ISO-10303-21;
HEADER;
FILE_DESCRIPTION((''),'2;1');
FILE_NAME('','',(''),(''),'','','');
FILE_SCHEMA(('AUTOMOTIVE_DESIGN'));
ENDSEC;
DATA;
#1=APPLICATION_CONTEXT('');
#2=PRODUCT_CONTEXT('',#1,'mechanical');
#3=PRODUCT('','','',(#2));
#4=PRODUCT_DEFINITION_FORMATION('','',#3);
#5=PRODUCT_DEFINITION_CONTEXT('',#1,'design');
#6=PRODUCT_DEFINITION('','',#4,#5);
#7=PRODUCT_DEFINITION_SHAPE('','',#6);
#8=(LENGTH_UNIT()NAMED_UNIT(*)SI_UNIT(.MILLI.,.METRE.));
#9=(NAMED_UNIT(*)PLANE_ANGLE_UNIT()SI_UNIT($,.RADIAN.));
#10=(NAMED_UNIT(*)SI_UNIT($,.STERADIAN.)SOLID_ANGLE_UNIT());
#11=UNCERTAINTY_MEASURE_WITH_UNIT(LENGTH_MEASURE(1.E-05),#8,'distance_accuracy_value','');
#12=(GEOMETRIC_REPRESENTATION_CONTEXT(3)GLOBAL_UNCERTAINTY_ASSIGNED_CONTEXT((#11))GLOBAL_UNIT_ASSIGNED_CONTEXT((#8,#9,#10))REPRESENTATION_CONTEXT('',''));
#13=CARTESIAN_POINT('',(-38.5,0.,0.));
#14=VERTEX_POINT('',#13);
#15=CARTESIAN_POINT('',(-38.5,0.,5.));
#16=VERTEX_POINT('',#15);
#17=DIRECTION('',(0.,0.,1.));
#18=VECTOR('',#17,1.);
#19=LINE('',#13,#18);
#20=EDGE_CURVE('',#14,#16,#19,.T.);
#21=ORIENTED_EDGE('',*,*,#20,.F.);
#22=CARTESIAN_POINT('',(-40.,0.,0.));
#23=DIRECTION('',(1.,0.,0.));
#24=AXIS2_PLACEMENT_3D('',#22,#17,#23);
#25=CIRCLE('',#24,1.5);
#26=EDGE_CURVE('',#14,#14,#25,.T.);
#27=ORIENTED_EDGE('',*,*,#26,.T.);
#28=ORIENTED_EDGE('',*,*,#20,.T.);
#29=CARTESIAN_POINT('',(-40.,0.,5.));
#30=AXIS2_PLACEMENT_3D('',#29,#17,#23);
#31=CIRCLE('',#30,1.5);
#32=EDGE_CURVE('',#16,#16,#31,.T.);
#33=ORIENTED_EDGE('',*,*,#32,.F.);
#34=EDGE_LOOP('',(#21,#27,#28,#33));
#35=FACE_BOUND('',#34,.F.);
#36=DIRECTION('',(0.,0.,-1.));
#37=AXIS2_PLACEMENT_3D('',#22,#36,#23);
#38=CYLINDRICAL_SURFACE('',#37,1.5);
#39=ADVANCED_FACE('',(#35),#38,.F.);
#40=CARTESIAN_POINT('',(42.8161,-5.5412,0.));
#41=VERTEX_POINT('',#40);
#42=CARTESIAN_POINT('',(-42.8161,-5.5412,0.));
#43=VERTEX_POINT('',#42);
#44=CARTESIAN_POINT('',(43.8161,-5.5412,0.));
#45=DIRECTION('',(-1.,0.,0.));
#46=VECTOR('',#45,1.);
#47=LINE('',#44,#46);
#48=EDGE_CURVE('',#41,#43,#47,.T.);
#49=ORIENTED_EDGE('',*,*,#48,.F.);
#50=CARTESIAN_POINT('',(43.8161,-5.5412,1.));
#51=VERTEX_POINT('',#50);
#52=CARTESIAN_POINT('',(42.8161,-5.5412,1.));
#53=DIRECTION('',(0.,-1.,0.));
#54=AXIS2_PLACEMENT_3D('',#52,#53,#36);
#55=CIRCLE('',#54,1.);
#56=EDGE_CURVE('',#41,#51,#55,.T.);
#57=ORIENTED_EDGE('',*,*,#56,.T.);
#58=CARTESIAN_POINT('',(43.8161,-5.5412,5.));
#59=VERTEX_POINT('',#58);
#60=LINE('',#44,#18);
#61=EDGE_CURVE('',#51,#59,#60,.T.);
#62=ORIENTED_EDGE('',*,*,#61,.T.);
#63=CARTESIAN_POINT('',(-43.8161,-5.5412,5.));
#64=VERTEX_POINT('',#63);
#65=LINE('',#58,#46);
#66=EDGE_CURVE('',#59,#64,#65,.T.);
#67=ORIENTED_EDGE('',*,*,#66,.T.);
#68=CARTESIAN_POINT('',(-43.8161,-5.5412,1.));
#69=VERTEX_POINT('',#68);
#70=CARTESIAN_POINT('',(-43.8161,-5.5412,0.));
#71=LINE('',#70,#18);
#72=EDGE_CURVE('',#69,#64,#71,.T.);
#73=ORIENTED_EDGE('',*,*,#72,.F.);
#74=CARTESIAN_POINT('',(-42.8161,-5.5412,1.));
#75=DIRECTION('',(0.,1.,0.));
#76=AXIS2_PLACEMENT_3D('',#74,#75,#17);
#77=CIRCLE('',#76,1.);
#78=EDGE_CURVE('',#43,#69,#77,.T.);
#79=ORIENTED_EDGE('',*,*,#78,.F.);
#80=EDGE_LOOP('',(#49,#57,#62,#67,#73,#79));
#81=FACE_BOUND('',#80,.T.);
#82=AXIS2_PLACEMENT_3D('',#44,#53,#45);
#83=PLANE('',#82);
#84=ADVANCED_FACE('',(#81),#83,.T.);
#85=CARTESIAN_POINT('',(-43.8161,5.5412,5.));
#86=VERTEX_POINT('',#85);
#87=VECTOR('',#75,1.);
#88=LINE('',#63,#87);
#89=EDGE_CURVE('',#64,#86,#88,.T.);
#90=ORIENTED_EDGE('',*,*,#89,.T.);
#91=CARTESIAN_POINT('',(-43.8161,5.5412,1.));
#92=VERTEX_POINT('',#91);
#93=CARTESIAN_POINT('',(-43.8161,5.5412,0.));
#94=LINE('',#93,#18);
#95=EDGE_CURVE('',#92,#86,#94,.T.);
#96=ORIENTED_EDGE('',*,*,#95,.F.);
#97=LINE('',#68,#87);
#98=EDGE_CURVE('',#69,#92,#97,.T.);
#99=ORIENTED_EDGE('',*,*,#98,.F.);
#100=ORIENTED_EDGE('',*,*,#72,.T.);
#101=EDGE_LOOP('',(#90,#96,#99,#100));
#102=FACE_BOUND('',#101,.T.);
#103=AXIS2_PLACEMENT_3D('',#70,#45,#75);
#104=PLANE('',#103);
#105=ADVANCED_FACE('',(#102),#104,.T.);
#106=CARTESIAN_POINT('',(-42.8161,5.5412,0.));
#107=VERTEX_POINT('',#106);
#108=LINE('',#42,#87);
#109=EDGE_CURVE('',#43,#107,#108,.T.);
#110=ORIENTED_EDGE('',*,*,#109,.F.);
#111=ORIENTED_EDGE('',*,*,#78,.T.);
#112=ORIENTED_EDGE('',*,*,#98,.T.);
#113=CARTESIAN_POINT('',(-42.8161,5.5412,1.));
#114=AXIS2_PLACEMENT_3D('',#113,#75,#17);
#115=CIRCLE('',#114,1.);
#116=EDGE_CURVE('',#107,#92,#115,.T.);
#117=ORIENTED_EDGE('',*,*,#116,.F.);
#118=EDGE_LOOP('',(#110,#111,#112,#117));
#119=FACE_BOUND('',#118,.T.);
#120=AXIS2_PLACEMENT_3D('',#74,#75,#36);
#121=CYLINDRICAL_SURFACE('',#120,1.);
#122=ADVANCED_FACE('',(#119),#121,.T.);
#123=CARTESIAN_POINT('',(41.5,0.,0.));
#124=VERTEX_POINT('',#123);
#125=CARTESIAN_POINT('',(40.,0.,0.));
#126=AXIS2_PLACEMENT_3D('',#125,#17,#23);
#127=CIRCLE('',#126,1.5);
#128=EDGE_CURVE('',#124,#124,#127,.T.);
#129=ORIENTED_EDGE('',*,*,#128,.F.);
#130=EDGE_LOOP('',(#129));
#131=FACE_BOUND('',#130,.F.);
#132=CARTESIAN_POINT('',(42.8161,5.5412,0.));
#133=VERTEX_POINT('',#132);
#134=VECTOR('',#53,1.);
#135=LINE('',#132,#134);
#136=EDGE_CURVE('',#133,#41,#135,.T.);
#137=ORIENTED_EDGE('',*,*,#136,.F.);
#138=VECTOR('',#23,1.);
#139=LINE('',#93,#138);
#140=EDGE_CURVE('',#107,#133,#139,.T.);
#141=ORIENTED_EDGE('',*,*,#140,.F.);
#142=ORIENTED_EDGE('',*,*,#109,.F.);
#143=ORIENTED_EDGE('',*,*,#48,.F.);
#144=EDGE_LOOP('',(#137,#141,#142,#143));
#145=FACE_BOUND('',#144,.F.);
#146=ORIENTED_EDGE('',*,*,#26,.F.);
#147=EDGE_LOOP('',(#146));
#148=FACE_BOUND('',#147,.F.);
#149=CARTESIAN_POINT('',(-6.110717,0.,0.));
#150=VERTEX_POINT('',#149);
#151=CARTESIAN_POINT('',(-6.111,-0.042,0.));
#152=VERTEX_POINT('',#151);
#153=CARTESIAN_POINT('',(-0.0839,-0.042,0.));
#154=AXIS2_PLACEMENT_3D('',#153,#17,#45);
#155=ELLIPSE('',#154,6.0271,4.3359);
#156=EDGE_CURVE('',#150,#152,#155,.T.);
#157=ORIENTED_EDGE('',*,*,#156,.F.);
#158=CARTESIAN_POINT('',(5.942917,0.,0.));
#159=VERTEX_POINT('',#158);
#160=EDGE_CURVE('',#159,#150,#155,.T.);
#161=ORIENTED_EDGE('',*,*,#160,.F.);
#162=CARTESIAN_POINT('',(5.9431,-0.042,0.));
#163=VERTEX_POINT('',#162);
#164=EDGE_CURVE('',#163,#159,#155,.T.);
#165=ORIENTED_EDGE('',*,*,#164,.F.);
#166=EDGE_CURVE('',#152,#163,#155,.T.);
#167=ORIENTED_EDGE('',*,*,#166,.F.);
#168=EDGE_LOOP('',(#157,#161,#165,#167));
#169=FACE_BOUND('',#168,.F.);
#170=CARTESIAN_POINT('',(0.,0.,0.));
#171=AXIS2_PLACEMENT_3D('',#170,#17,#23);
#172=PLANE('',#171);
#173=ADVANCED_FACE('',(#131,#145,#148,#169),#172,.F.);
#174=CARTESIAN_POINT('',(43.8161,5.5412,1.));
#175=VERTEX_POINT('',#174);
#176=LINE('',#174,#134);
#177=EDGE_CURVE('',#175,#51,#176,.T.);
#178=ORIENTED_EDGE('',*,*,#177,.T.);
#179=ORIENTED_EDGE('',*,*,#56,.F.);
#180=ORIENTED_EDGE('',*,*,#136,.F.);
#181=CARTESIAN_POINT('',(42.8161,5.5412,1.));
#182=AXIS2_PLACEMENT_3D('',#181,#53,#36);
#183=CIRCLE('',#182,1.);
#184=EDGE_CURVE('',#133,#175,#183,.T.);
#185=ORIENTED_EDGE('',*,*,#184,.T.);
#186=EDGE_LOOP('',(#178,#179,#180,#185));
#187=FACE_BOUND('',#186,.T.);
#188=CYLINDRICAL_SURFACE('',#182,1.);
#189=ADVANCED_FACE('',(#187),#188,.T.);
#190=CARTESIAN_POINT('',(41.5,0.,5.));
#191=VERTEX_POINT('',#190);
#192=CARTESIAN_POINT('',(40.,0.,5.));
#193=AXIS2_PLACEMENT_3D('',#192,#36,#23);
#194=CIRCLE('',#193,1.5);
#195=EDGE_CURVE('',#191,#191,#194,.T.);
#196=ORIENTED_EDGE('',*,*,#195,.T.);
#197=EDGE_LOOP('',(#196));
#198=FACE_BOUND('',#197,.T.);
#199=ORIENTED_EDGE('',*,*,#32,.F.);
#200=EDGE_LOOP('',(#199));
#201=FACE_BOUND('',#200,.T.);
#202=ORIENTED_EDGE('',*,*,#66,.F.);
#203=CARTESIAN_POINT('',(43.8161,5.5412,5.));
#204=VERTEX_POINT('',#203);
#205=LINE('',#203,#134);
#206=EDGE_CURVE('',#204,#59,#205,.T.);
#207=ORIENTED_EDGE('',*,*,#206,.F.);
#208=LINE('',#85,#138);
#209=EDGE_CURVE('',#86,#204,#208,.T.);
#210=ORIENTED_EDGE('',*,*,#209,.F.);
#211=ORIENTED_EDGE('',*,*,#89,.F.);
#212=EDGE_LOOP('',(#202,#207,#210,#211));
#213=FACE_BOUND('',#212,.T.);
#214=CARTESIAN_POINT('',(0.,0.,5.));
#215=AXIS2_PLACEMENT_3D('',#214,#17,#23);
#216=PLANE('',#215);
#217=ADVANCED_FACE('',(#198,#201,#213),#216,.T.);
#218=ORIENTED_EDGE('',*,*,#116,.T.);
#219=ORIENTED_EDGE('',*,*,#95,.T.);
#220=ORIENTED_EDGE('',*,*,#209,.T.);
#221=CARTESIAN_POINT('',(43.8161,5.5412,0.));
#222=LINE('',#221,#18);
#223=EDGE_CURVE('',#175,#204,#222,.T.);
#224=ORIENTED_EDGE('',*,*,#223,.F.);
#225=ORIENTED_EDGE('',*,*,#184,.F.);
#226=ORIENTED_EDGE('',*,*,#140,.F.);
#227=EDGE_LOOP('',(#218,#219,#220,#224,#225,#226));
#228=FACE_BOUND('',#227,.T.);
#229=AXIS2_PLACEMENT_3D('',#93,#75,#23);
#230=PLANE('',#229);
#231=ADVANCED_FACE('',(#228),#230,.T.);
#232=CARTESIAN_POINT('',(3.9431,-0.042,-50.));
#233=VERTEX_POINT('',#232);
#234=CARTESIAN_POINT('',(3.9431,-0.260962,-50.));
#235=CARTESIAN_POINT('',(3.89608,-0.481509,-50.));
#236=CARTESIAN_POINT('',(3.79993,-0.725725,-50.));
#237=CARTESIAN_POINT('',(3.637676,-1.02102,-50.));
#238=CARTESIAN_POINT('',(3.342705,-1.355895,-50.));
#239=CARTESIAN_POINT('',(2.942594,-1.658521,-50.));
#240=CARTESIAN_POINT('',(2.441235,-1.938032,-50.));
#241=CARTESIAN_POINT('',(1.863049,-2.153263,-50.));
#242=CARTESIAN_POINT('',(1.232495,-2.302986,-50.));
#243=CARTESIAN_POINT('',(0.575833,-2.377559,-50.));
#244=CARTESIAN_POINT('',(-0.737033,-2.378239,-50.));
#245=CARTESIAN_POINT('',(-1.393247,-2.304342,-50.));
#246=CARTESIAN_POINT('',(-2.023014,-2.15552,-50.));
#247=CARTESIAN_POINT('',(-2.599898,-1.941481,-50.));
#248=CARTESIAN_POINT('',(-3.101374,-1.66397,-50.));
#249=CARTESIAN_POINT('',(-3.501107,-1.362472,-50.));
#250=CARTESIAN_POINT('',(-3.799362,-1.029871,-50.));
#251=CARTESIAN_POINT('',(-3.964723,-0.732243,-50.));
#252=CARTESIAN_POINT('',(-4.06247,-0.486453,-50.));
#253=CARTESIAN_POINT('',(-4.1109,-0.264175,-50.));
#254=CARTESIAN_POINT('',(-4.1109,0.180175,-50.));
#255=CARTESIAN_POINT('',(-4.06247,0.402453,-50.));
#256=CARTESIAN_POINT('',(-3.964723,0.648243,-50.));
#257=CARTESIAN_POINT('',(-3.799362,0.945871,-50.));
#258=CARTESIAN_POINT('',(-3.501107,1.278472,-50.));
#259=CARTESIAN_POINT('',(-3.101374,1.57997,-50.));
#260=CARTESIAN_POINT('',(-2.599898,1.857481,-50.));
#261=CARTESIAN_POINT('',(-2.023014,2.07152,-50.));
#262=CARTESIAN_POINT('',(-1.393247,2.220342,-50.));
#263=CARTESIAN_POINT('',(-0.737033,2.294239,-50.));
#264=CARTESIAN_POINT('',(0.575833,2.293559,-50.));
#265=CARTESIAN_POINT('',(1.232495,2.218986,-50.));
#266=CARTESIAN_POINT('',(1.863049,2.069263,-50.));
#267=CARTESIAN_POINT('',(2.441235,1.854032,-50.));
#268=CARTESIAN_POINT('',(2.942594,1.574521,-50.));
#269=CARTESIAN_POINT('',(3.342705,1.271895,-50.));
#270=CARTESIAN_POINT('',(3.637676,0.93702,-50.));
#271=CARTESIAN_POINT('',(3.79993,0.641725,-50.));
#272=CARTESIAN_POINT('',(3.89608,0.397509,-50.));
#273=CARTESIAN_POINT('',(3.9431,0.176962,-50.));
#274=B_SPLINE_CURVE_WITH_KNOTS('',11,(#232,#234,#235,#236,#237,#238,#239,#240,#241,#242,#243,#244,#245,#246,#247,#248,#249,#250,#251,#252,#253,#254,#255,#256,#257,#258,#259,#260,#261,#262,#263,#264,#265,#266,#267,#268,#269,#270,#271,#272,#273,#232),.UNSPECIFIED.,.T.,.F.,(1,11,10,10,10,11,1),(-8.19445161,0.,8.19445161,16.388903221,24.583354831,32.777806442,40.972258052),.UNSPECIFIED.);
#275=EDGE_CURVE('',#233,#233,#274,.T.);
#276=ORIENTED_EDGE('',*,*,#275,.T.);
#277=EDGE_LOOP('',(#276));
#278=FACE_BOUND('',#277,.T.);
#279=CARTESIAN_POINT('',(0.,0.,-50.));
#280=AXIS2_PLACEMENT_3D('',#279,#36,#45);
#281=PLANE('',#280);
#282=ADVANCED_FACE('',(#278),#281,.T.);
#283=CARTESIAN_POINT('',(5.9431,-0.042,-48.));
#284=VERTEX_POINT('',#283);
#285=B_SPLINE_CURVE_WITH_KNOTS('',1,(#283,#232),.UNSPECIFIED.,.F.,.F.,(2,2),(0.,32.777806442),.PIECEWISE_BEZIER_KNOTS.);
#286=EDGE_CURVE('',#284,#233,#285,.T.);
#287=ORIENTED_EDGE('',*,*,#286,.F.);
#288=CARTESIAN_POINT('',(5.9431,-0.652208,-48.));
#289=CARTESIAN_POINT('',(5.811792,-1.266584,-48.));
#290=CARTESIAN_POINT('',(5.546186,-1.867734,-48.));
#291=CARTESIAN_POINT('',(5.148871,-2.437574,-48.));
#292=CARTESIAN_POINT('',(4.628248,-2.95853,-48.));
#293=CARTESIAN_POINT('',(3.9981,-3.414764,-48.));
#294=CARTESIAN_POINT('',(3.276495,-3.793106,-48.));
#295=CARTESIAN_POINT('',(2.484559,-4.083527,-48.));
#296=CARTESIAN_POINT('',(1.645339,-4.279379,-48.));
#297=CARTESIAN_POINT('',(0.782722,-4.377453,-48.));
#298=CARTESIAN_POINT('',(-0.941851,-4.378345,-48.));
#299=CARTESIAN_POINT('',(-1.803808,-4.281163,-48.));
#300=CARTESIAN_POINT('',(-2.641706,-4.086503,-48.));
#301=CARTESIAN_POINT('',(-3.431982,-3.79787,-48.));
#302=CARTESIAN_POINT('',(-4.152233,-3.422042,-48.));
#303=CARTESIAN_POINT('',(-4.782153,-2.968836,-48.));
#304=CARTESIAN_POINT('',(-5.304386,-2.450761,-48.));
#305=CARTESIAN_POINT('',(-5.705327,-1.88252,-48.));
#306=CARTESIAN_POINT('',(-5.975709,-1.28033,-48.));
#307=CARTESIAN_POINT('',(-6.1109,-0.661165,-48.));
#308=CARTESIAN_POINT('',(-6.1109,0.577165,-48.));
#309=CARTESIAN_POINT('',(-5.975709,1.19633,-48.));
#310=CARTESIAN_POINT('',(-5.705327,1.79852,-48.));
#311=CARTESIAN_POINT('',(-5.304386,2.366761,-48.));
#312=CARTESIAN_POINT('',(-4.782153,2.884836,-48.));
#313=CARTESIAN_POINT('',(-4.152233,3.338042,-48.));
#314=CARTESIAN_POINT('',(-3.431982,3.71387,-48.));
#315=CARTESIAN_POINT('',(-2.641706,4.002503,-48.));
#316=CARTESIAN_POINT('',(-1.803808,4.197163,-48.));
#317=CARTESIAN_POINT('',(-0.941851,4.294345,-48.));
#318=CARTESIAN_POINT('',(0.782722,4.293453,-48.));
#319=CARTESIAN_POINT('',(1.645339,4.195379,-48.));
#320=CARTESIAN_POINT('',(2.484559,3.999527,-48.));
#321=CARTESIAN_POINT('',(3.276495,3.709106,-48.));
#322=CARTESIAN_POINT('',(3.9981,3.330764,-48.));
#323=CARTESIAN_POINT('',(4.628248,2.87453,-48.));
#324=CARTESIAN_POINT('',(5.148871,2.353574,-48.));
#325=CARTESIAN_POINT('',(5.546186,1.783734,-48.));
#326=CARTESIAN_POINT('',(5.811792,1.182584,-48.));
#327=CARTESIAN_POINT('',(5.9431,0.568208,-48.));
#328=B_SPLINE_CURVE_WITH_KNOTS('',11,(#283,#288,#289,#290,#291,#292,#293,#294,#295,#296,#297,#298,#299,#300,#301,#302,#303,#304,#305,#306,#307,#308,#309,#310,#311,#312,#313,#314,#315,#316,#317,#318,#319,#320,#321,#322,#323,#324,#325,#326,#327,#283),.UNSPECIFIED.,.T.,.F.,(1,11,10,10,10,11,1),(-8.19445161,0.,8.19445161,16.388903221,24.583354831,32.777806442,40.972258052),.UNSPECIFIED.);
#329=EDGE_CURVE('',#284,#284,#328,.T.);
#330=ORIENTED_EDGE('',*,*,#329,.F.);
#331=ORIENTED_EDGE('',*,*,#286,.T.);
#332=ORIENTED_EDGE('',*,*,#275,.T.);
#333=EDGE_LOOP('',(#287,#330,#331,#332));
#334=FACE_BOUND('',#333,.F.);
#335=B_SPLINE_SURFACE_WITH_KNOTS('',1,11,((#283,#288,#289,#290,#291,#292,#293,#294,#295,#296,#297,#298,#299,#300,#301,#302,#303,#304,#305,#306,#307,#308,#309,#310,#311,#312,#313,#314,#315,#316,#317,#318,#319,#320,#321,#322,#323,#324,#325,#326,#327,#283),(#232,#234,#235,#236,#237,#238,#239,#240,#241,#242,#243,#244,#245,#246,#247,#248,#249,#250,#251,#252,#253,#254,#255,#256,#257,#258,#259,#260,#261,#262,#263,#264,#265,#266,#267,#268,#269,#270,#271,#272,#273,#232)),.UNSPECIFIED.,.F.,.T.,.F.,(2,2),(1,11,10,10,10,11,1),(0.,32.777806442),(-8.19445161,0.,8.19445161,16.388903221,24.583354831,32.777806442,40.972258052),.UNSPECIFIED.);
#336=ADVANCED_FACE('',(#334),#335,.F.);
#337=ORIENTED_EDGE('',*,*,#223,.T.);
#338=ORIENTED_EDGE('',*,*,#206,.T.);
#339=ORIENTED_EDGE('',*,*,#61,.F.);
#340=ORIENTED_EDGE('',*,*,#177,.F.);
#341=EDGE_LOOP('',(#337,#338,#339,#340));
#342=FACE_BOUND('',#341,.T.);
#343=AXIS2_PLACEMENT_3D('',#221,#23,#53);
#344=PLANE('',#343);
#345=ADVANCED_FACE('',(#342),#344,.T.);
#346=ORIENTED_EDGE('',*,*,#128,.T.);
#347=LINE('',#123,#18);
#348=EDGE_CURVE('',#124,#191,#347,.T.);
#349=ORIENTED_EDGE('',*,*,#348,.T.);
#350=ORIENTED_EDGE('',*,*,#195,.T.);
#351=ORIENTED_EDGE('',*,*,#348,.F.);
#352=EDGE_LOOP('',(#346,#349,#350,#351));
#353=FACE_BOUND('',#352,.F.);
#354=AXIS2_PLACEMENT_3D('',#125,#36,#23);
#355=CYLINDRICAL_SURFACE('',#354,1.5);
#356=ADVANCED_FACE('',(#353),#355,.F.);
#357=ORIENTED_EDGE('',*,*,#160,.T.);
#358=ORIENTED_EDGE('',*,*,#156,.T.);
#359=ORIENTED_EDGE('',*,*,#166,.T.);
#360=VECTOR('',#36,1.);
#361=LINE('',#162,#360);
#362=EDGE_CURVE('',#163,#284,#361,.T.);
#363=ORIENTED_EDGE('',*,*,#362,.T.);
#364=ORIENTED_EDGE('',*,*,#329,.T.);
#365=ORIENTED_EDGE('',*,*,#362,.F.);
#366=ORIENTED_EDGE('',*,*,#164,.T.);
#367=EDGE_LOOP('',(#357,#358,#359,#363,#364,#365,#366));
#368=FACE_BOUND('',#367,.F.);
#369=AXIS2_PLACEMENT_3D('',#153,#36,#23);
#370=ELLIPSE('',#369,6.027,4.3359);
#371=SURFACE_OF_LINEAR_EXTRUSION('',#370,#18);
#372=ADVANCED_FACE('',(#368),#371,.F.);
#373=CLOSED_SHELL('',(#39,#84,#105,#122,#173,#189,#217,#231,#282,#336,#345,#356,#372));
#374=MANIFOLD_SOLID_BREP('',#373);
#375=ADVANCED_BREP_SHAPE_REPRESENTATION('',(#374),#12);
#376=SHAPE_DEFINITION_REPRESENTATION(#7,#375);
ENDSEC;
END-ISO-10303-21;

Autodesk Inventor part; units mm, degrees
ref_plane "YZ Plane" through (0, 0, 0) normal (1, 0, 0) x (0, 1, 0)
ref_plane "XZ Plane" through (0, 0, 0) normal (0, 1, 0) x (-1, 0, 0)
ref_plane "XY Plane" through (0, 0, 0) normal (0, 0, 1) x (1, 0, 0)
sketch "Sketch1" plane through (0, 0, 0) normal (0, 0, 1) x (1, 0, 0)
  line L0 (-40, 0) -> (40, 0)
  circle A0 centre (-40, 0) radius 1.5
  circle A1 centre (40, 0) radius 1.5
  line L1 (-43.8161, 5.5412) -> (43.8161, 5.5412)
  line L2 (43.8161, 5.5412) -> (43.8161, -5.5412)
  line L3 (43.8161, -5.5412) -> (-43.8161, -5.5412)
  line L4 (-43.8161, -5.5412) -> (-43.8161, 5.5412)
  ellipse E0 centre (-0.0839, -0.042) end of major axis (-6.111, -0.042) minor radius 4.3359
  point P0 (0, 0)
  point P1 (0, 0)
  point P2 (0, -5.5412)
  point P3 (-43.8161, 0)
  point P4 (43.8161, 0)
extrude "Extrusion2" add sketch "Sketch1" along normal blind 5
sketch "Sketch4" plane through (0, 0, 0) normal (0, 0, -1) x (-1, 0, 0)
  ellipse E0 centre (0.0839, -0.042) end of major axis (-5.9431, -0.042) minor radius 4.3359 projected
  point P0 (0, 0)
extrude "Extrusion3" add sketch "Sketch4" along normal blind 50 and the other way blind 5
chamfer "Chamfer1" distance 2 angle 45 1 edges at (-6.111, -0.042, -50)
fillet "Fillet1" radius 1 1 edges at (-43.8161, 0, 0)
fillet "Fillet2" radius 1 1 edges at (43.8161, 0, 0)
properties part number "apoioG"
